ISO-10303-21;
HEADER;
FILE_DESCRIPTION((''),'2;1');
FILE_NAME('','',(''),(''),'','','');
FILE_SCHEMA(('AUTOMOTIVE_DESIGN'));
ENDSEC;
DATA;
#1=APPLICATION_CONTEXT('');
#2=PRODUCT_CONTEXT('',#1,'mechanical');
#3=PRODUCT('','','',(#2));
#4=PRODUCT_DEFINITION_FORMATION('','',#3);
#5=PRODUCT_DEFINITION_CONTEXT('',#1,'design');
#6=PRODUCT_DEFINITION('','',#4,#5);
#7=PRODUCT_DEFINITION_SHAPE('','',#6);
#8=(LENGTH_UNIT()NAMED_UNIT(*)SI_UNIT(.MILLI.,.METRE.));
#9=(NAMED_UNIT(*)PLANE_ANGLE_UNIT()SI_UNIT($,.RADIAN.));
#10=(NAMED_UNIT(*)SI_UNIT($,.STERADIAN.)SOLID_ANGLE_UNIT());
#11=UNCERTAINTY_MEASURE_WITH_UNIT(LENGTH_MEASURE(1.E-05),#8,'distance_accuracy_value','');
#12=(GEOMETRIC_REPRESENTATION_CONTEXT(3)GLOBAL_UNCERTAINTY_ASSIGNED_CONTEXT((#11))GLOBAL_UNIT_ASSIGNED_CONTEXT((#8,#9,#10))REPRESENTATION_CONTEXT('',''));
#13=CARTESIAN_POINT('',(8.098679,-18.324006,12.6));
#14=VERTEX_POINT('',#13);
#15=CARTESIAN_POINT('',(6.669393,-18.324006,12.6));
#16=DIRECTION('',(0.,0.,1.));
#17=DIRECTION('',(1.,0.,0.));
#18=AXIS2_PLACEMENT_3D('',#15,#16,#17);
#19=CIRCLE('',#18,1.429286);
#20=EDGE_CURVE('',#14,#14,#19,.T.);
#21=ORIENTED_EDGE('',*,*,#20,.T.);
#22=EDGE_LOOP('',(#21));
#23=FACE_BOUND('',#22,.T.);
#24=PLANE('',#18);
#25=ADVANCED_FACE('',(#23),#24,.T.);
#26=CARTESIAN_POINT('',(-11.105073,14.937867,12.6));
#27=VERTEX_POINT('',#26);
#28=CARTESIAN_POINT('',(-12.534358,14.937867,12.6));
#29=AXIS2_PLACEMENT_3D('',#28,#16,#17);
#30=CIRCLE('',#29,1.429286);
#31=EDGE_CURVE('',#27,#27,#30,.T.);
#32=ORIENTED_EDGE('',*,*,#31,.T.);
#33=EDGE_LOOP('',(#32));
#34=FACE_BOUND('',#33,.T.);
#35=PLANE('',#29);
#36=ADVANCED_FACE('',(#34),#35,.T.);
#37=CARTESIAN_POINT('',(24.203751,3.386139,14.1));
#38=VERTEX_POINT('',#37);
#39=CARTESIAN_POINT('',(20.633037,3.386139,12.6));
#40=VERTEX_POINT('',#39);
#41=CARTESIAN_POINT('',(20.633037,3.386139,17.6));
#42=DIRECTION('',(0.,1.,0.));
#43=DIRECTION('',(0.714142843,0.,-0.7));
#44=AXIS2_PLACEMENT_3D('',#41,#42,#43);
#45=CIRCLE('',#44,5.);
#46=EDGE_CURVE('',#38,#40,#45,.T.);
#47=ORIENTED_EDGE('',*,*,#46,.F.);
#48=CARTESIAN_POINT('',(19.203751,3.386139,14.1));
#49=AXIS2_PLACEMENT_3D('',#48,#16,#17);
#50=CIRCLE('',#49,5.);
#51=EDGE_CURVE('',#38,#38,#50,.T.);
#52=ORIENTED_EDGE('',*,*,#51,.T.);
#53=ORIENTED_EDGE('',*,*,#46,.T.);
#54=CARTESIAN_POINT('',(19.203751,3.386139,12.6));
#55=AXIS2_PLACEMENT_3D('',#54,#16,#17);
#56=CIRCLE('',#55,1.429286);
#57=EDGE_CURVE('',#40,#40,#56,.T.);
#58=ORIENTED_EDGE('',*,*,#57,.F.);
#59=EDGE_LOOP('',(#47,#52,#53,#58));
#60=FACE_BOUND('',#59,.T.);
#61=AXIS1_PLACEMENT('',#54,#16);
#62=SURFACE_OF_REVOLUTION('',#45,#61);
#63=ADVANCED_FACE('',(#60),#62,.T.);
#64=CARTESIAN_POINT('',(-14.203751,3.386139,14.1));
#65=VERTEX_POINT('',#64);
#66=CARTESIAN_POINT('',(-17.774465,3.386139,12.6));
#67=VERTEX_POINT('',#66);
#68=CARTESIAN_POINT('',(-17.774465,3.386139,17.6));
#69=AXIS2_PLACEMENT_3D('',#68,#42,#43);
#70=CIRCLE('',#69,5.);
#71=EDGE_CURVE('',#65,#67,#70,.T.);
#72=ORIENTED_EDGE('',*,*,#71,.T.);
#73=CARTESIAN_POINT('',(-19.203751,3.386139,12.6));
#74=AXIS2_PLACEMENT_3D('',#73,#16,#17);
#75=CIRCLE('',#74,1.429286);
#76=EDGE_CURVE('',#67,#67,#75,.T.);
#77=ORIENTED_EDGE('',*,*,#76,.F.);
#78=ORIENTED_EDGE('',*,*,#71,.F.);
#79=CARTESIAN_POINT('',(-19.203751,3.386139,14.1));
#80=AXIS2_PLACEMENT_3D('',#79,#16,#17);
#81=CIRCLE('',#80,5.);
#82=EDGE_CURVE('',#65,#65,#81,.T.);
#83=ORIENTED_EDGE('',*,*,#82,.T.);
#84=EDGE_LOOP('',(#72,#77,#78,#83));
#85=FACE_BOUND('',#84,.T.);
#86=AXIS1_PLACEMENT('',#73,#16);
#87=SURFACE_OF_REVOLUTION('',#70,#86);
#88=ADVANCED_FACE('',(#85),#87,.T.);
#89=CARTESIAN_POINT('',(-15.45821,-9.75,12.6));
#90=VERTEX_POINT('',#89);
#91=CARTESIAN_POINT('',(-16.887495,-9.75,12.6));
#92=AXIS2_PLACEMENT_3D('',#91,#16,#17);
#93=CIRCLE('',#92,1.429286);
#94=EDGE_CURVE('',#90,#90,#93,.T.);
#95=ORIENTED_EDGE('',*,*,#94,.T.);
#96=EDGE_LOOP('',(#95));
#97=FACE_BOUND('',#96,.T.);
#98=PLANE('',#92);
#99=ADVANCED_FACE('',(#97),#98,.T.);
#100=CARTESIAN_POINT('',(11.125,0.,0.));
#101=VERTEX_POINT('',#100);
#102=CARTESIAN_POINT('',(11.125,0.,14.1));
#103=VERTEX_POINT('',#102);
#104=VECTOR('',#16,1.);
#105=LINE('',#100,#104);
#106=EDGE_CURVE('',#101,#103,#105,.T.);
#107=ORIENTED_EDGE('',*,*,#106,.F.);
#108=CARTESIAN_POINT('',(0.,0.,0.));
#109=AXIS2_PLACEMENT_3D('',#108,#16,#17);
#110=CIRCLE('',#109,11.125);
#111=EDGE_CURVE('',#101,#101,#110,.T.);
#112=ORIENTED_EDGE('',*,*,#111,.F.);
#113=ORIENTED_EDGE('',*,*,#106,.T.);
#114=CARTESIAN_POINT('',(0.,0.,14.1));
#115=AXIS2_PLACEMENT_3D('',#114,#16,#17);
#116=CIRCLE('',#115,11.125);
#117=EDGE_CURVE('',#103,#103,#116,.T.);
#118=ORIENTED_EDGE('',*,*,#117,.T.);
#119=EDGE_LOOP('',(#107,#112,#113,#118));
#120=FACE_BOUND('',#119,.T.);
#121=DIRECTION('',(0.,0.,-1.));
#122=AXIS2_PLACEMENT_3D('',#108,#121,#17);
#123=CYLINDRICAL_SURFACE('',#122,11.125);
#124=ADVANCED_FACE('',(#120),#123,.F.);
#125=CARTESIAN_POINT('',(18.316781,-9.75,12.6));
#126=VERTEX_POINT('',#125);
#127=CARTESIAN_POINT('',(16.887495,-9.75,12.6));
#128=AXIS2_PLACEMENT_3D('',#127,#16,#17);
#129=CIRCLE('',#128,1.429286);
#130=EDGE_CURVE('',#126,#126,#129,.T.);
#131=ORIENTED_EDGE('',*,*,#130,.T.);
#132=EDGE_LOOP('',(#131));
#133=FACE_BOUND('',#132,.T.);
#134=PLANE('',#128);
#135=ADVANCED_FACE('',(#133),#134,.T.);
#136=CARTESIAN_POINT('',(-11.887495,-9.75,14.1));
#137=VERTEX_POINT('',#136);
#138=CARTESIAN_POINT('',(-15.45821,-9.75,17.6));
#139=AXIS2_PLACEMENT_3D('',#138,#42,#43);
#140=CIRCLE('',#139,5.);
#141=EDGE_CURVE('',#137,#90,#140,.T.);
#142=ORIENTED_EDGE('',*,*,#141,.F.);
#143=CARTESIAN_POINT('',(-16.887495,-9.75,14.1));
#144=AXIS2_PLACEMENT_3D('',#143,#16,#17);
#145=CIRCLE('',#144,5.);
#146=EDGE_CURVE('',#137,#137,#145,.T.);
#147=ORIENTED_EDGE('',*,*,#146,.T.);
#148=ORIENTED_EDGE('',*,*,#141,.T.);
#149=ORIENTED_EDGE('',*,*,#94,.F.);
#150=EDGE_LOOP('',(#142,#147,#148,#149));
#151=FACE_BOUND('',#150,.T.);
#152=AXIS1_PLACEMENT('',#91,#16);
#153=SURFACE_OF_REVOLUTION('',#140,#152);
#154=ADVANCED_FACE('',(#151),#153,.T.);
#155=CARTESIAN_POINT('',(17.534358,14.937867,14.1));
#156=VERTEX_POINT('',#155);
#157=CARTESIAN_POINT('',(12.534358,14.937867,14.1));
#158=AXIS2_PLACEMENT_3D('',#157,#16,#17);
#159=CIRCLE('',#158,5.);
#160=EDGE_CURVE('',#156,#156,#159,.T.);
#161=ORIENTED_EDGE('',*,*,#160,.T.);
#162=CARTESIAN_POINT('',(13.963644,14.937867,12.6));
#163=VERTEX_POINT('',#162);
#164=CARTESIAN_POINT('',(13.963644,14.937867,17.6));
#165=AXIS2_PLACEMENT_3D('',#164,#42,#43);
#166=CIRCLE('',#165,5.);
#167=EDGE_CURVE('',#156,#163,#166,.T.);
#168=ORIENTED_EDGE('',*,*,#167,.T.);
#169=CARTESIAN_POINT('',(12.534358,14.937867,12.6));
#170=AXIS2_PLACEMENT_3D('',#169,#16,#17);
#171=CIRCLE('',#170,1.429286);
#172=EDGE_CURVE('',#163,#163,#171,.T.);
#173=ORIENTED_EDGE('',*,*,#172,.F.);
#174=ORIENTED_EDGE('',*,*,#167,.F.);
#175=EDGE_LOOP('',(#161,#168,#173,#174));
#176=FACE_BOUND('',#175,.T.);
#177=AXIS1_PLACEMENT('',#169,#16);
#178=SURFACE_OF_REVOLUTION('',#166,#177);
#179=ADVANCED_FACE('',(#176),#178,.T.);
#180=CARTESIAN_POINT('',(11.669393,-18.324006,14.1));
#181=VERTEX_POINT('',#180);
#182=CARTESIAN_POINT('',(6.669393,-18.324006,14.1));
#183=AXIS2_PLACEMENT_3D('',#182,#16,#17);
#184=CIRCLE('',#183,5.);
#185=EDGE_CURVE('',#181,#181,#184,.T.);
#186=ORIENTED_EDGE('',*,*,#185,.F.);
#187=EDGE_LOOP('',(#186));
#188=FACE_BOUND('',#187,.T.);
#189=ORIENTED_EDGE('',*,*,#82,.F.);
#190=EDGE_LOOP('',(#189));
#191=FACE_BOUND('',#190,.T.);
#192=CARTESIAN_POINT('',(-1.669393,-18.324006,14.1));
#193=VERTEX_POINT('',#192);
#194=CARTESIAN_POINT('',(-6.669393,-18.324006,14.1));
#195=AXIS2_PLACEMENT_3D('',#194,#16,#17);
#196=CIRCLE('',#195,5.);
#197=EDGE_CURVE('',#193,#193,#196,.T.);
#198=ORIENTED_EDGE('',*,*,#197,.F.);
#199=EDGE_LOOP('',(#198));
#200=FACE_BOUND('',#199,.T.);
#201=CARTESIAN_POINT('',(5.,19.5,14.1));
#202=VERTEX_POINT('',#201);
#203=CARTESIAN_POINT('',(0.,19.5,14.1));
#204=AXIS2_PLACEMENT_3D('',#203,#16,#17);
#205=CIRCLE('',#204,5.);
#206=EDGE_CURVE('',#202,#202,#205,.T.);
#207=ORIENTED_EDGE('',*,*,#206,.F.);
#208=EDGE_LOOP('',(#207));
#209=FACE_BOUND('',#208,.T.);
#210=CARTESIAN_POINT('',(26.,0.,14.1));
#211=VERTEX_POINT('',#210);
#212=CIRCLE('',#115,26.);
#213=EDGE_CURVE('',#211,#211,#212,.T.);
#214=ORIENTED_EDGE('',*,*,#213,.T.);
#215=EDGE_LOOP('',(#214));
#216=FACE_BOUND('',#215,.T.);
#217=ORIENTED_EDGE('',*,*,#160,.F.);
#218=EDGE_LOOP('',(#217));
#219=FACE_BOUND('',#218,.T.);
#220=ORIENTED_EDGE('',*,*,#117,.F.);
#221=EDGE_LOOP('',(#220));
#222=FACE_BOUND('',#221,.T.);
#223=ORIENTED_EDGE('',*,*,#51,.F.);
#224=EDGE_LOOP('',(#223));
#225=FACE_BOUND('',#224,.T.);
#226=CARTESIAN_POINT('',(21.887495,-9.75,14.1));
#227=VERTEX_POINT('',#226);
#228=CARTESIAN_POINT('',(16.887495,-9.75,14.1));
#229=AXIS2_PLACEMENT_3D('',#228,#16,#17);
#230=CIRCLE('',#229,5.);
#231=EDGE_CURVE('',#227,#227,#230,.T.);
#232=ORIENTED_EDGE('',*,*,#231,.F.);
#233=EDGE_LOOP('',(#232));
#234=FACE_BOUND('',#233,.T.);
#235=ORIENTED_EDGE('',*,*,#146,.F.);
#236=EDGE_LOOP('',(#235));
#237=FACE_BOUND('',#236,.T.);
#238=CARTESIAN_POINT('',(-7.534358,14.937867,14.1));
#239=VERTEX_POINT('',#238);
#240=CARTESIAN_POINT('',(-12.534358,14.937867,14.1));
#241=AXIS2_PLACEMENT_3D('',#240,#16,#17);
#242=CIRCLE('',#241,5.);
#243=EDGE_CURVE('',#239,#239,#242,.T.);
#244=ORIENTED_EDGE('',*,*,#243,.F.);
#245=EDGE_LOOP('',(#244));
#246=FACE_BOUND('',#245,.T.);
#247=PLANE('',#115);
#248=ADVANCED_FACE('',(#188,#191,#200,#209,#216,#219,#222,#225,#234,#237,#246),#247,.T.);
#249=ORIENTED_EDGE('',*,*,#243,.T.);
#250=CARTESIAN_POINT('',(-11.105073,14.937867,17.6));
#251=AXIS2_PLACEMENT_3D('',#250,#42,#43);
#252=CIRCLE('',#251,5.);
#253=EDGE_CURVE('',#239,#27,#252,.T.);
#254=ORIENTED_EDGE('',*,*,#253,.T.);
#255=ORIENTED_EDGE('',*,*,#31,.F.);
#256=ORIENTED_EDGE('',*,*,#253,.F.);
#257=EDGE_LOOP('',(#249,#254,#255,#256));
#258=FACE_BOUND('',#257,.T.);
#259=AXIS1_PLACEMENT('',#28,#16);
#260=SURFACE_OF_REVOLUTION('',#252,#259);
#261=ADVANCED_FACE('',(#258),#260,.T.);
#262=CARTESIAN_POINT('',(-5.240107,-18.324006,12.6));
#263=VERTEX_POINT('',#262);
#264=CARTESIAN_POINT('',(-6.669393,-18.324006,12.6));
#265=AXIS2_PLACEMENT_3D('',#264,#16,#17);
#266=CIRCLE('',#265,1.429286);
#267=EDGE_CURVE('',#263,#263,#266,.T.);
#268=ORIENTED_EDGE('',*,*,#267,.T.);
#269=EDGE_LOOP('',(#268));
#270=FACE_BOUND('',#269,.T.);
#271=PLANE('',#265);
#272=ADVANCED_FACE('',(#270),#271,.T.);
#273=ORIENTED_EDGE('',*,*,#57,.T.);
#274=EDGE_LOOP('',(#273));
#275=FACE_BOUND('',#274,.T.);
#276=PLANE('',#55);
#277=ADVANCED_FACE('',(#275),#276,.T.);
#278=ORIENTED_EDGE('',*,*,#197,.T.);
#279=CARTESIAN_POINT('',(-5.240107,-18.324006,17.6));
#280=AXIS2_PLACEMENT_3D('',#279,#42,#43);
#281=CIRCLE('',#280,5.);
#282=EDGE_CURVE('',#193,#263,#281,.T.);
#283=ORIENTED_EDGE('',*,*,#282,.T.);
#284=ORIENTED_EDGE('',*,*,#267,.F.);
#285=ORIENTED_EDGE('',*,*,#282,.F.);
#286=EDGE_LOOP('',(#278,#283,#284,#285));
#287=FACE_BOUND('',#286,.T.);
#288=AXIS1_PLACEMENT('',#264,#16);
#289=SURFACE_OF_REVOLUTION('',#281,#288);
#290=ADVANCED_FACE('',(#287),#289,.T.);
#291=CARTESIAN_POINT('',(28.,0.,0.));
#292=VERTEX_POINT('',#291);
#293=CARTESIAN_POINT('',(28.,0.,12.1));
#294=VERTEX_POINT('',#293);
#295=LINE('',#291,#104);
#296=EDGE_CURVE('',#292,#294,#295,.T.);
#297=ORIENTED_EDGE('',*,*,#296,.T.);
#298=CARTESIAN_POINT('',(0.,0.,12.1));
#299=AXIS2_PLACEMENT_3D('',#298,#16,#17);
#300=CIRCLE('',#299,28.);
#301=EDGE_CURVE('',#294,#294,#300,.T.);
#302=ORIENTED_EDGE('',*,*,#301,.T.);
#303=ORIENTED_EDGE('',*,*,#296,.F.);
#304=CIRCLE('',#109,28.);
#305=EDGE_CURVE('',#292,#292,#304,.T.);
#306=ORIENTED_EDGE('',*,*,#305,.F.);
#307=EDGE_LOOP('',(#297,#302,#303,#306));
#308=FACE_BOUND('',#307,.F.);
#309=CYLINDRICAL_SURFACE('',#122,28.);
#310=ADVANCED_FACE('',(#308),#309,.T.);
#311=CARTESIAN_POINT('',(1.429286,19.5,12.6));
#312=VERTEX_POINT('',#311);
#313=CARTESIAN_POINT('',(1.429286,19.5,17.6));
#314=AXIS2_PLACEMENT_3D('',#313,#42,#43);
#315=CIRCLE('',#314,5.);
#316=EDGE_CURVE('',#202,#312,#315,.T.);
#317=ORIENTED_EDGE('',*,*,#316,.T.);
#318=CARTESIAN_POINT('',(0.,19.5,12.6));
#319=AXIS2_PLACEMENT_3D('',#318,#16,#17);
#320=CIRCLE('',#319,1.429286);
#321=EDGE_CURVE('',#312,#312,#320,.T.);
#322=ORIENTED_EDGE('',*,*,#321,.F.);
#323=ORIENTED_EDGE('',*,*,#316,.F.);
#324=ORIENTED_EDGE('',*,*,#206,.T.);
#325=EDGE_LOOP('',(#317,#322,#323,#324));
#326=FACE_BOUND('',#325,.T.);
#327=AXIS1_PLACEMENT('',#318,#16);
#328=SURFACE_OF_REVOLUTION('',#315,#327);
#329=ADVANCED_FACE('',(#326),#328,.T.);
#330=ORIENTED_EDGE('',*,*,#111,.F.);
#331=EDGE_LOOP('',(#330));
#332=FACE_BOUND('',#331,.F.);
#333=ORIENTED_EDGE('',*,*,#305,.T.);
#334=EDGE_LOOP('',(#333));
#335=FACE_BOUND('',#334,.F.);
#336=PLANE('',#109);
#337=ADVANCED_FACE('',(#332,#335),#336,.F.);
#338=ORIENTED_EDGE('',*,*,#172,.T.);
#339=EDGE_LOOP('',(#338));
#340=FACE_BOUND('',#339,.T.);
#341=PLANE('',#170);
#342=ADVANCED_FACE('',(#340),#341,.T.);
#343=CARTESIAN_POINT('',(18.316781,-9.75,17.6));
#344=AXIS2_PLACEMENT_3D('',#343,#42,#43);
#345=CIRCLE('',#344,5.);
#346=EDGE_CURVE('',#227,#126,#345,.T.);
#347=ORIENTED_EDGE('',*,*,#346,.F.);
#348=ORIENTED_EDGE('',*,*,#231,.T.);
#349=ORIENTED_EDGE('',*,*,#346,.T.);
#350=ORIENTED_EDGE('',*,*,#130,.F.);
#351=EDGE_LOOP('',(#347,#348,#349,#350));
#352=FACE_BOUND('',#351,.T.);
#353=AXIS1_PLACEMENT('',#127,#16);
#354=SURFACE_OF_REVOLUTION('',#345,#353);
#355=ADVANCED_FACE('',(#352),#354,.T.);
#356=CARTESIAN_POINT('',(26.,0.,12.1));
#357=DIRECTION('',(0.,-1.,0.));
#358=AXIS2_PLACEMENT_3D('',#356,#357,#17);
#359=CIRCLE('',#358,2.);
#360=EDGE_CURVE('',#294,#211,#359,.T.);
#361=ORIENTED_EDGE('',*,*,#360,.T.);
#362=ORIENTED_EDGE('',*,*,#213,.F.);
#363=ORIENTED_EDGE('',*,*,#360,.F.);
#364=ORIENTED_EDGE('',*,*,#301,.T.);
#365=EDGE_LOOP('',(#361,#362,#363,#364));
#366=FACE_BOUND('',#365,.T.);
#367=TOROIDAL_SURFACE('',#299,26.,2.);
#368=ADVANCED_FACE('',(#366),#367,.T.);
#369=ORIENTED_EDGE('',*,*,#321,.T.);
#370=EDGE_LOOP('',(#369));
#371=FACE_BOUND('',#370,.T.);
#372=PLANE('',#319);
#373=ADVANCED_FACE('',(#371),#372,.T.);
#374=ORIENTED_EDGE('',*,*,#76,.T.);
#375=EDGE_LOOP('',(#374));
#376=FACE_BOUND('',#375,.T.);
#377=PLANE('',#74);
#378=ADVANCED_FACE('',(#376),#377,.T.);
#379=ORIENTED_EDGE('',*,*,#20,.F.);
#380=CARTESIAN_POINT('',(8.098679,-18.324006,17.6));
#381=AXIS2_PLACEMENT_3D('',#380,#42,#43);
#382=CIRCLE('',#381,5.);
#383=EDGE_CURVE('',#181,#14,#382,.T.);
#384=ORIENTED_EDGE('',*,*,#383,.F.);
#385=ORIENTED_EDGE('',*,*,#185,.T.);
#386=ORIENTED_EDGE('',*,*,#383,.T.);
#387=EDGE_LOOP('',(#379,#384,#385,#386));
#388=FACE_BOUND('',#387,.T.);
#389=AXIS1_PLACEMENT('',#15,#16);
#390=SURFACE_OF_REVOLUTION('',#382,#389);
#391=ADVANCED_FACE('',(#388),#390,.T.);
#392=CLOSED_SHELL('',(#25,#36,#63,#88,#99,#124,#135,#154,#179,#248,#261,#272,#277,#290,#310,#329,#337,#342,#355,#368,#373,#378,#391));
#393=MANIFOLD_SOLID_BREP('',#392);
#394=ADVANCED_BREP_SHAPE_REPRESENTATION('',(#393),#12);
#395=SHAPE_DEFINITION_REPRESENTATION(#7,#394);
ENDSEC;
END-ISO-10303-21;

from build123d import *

# Parameters (mm, degrees)
F0_R     = 28
F0_R_2   = 11.125
F1_DEPTH = 14.1
F2_R     = 2
F3_R     = 5
F4_DEPTH = 1.5


# Not quite as in the source:
# - a fillet or chamfer that OpenCascade refuses, or shapes differently, is made with other operations: its cross-section is extruded or revolved along the edge and cut away or added


with BuildPart() as f1:
    # F0 (on Top) → F1 (new body)
    with BuildSketch(Plane.XY):
        Circle(F0_R)
        Circle(F0_R_2, mode=Mode.SUBTRACT)
    extrude(amount=F1_DEPTH)

    # F2
    f2_edges = [f1.edges().sort_by_distance(p)[0] for p in [
        (-28, 0, 14.1),
    ]]
    fillet(f2_edges, radius=F2_R)

    # F3 (on face) → F4 (cut)
    with BuildSketch(Plane.XY.offset(14.1)):
        with Locations((0, 19.5)):
            Circle(F3_R)
        with Locations((-12.5343583889, 14.9378666408)):
            Circle(F3_R)
        with Locations((-19.2037511837, 3.3861394645)):
            Circle(F3_R)
        with Locations((-16.8874953738, -9.75)):
            Circle(F3_R)
        with Locations((-6.6693927949, -18.3240061053)):
            Circle(F3_R)
        with Locations((6.6693927949, -18.3240061053)):
            Circle(F3_R)
        with Locations((16.8874953738, -9.75)):
            Circle(F3_R)
        with Locations((19.2037511837, 3.3861394645)):
            Circle(F3_R)
        with Locations((12.5343583889, 14.9378666408)):
            Circle(F3_R)
    extrude(amount=-F4_DEPTH, mode=Mode.SUBTRACT)

    # F5: fillet of radius 5 on 9 edges, made by hand

    # F5_s1 → F5_t2 (revolve)
    with BuildSketch(Plane.XZ.offset(-19.5)):
        with BuildLine():
            ThreePointArc((5, 14.1), (3.3657774588, 12.9902277714), (1.4292857857, 12.6))
            Line((1.4292857857, 12.6), (5, 12.6))
            Line((5, 12.6), (5, 14.1))
        make_face()
    revolve(axis=Axis((0, 19.5, 12.6), (0, 0, 1)))

    # F5_s3 → F5_t4 (revolve)
    with BuildSketch(Plane.XZ.offset(-14.9378666408)):
        with BuildLine():
            ThreePointArc((-7.5343583889, 14.1), (-9.1685809301, 12.9902277714), (-11.1050726032, 12.6))
            Line((-11.1050726032, 12.6), (-7.5343583889, 12.6))
            Line((-7.5343583889, 12.6), (-7.5343583889, 14.1))
        make_face()
    revolve(axis=Axis((-12.5343583889, 14.9378666408, 12.6), (0, 0, 1)))

    # F5_s5 → F5_t6 (revolve)
    with BuildSketch(Plane.XZ.offset(-3.3861394645)):
        with BuildLine():
            ThreePointArc((-14.2037511837, 14.1), (-15.8379737249, 12.9902277714), (-17.774465398, 12.6))
            Line((-17.774465398, 12.6), (-14.2037511837, 12.6))
            Line((-14.2037511837, 12.6), (-14.2037511837, 14.1))
        make_face()
    revolve(axis=Axis((-19.2037511837, 3.3861394645, 12.6), (0, 0, 1)))

    # F5_s7 → F5_t8 (revolve)
    with BuildSketch(Plane.XZ.offset(9.75)):
        with BuildLine():
            ThreePointArc((-11.8874953738, 14.1), (-13.521717915, 12.9902277714), (-15.4582095881, 12.6))
            Line((-15.4582095881, 12.6), (-11.8874953738, 12.6))
            Line((-11.8874953738, 12.6), (-11.8874953738, 14.1))
        make_face()
    revolve(axis=Axis((-16.8874953738, -9.75, 12.6), (0, 0, 1)))

    # F5_s9 → F5_t10 (revolve)
    with BuildSketch(Plane.XZ.offset(18.3240061053)):
        with BuildLine():
            ThreePointArc((-1.6693927949, 14.1), (-3.303615336, 12.9902277714), (-5.2401070091, 12.6))
            Line((-5.2401070091, 12.6), (-1.6693927949, 12.6))
            Line((-1.6693927949, 12.6), (-1.6693927949, 14.1))
        make_face()
    revolve(axis=Axis((-6.6693927949, -18.3240061053, 12.6), (0, 0, 1)))

    # F5_s11 → F5_t12 (revolve)
    with BuildSketch(Plane.XZ.offset(18.3240061053)):
        with BuildLine():
            ThreePointArc((11.6693927949, 14.1), (10.0351702537, 12.9902277714), (8.0986785806, 12.6))
            Line((8.0986785806, 12.6), (11.6693927949, 12.6))
            Line((11.6693927949, 12.6), (11.6693927949, 14.1))
        make_face()
    revolve(axis=Axis((6.6693927949, -18.3240061053, 12.6), (0, 0, 1)))

    # F5_s13 → F5_t14 (revolve)
    with BuildSketch(Plane.XZ.offset(9.75)):
        with BuildLine():
            ThreePointArc((21.8874953738, 14.1), (20.2532728326, 12.9902277714), (18.3167811595, 12.6))
            Line((18.3167811595, 12.6), (21.8874953738, 12.6))
            Line((21.8874953738, 12.6), (21.8874953738, 14.1))
        make_face()
    revolve(axis=Axis((16.8874953738, -9.75, 12.6), (0, 0, 1)))

    # F5_s15 → F5_t16 (revolve)
    with BuildSketch(Plane.XZ.offset(-3.3861394645)):
        with BuildLine():
            ThreePointArc((24.2037511837, 14.1), (22.5695286426, 12.9902277714), (20.6330369695, 12.6))
            Line((20.6330369695, 12.6), (24.2037511837, 12.6))
            Line((24.2037511837, 12.6), (24.2037511837, 14.1))
        make_face()
    revolve(axis=Axis((19.2037511837, 3.3861394645, 12.6), (0, 0, 1)))

    # F5_s17 → F5_t18 (revolve)
    with BuildSketch(Plane.XZ.offset(-14.9378666408)):
        with BuildLine():
            ThreePointArc((17.5343583889, 14.1), (15.9001358477, 12.9902277714), (13.9636441746, 12.6))
            Line((13.9636441746, 12.6), (17.5343583889, 12.6))
            Line((17.5343583889, 12.6), (17.5343583889, 14.1))
        make_face()
    revolve(axis=Axis((12.5343583889, 14.9378666408, 12.6), (0, 0, 1)))


solid = f1.part
